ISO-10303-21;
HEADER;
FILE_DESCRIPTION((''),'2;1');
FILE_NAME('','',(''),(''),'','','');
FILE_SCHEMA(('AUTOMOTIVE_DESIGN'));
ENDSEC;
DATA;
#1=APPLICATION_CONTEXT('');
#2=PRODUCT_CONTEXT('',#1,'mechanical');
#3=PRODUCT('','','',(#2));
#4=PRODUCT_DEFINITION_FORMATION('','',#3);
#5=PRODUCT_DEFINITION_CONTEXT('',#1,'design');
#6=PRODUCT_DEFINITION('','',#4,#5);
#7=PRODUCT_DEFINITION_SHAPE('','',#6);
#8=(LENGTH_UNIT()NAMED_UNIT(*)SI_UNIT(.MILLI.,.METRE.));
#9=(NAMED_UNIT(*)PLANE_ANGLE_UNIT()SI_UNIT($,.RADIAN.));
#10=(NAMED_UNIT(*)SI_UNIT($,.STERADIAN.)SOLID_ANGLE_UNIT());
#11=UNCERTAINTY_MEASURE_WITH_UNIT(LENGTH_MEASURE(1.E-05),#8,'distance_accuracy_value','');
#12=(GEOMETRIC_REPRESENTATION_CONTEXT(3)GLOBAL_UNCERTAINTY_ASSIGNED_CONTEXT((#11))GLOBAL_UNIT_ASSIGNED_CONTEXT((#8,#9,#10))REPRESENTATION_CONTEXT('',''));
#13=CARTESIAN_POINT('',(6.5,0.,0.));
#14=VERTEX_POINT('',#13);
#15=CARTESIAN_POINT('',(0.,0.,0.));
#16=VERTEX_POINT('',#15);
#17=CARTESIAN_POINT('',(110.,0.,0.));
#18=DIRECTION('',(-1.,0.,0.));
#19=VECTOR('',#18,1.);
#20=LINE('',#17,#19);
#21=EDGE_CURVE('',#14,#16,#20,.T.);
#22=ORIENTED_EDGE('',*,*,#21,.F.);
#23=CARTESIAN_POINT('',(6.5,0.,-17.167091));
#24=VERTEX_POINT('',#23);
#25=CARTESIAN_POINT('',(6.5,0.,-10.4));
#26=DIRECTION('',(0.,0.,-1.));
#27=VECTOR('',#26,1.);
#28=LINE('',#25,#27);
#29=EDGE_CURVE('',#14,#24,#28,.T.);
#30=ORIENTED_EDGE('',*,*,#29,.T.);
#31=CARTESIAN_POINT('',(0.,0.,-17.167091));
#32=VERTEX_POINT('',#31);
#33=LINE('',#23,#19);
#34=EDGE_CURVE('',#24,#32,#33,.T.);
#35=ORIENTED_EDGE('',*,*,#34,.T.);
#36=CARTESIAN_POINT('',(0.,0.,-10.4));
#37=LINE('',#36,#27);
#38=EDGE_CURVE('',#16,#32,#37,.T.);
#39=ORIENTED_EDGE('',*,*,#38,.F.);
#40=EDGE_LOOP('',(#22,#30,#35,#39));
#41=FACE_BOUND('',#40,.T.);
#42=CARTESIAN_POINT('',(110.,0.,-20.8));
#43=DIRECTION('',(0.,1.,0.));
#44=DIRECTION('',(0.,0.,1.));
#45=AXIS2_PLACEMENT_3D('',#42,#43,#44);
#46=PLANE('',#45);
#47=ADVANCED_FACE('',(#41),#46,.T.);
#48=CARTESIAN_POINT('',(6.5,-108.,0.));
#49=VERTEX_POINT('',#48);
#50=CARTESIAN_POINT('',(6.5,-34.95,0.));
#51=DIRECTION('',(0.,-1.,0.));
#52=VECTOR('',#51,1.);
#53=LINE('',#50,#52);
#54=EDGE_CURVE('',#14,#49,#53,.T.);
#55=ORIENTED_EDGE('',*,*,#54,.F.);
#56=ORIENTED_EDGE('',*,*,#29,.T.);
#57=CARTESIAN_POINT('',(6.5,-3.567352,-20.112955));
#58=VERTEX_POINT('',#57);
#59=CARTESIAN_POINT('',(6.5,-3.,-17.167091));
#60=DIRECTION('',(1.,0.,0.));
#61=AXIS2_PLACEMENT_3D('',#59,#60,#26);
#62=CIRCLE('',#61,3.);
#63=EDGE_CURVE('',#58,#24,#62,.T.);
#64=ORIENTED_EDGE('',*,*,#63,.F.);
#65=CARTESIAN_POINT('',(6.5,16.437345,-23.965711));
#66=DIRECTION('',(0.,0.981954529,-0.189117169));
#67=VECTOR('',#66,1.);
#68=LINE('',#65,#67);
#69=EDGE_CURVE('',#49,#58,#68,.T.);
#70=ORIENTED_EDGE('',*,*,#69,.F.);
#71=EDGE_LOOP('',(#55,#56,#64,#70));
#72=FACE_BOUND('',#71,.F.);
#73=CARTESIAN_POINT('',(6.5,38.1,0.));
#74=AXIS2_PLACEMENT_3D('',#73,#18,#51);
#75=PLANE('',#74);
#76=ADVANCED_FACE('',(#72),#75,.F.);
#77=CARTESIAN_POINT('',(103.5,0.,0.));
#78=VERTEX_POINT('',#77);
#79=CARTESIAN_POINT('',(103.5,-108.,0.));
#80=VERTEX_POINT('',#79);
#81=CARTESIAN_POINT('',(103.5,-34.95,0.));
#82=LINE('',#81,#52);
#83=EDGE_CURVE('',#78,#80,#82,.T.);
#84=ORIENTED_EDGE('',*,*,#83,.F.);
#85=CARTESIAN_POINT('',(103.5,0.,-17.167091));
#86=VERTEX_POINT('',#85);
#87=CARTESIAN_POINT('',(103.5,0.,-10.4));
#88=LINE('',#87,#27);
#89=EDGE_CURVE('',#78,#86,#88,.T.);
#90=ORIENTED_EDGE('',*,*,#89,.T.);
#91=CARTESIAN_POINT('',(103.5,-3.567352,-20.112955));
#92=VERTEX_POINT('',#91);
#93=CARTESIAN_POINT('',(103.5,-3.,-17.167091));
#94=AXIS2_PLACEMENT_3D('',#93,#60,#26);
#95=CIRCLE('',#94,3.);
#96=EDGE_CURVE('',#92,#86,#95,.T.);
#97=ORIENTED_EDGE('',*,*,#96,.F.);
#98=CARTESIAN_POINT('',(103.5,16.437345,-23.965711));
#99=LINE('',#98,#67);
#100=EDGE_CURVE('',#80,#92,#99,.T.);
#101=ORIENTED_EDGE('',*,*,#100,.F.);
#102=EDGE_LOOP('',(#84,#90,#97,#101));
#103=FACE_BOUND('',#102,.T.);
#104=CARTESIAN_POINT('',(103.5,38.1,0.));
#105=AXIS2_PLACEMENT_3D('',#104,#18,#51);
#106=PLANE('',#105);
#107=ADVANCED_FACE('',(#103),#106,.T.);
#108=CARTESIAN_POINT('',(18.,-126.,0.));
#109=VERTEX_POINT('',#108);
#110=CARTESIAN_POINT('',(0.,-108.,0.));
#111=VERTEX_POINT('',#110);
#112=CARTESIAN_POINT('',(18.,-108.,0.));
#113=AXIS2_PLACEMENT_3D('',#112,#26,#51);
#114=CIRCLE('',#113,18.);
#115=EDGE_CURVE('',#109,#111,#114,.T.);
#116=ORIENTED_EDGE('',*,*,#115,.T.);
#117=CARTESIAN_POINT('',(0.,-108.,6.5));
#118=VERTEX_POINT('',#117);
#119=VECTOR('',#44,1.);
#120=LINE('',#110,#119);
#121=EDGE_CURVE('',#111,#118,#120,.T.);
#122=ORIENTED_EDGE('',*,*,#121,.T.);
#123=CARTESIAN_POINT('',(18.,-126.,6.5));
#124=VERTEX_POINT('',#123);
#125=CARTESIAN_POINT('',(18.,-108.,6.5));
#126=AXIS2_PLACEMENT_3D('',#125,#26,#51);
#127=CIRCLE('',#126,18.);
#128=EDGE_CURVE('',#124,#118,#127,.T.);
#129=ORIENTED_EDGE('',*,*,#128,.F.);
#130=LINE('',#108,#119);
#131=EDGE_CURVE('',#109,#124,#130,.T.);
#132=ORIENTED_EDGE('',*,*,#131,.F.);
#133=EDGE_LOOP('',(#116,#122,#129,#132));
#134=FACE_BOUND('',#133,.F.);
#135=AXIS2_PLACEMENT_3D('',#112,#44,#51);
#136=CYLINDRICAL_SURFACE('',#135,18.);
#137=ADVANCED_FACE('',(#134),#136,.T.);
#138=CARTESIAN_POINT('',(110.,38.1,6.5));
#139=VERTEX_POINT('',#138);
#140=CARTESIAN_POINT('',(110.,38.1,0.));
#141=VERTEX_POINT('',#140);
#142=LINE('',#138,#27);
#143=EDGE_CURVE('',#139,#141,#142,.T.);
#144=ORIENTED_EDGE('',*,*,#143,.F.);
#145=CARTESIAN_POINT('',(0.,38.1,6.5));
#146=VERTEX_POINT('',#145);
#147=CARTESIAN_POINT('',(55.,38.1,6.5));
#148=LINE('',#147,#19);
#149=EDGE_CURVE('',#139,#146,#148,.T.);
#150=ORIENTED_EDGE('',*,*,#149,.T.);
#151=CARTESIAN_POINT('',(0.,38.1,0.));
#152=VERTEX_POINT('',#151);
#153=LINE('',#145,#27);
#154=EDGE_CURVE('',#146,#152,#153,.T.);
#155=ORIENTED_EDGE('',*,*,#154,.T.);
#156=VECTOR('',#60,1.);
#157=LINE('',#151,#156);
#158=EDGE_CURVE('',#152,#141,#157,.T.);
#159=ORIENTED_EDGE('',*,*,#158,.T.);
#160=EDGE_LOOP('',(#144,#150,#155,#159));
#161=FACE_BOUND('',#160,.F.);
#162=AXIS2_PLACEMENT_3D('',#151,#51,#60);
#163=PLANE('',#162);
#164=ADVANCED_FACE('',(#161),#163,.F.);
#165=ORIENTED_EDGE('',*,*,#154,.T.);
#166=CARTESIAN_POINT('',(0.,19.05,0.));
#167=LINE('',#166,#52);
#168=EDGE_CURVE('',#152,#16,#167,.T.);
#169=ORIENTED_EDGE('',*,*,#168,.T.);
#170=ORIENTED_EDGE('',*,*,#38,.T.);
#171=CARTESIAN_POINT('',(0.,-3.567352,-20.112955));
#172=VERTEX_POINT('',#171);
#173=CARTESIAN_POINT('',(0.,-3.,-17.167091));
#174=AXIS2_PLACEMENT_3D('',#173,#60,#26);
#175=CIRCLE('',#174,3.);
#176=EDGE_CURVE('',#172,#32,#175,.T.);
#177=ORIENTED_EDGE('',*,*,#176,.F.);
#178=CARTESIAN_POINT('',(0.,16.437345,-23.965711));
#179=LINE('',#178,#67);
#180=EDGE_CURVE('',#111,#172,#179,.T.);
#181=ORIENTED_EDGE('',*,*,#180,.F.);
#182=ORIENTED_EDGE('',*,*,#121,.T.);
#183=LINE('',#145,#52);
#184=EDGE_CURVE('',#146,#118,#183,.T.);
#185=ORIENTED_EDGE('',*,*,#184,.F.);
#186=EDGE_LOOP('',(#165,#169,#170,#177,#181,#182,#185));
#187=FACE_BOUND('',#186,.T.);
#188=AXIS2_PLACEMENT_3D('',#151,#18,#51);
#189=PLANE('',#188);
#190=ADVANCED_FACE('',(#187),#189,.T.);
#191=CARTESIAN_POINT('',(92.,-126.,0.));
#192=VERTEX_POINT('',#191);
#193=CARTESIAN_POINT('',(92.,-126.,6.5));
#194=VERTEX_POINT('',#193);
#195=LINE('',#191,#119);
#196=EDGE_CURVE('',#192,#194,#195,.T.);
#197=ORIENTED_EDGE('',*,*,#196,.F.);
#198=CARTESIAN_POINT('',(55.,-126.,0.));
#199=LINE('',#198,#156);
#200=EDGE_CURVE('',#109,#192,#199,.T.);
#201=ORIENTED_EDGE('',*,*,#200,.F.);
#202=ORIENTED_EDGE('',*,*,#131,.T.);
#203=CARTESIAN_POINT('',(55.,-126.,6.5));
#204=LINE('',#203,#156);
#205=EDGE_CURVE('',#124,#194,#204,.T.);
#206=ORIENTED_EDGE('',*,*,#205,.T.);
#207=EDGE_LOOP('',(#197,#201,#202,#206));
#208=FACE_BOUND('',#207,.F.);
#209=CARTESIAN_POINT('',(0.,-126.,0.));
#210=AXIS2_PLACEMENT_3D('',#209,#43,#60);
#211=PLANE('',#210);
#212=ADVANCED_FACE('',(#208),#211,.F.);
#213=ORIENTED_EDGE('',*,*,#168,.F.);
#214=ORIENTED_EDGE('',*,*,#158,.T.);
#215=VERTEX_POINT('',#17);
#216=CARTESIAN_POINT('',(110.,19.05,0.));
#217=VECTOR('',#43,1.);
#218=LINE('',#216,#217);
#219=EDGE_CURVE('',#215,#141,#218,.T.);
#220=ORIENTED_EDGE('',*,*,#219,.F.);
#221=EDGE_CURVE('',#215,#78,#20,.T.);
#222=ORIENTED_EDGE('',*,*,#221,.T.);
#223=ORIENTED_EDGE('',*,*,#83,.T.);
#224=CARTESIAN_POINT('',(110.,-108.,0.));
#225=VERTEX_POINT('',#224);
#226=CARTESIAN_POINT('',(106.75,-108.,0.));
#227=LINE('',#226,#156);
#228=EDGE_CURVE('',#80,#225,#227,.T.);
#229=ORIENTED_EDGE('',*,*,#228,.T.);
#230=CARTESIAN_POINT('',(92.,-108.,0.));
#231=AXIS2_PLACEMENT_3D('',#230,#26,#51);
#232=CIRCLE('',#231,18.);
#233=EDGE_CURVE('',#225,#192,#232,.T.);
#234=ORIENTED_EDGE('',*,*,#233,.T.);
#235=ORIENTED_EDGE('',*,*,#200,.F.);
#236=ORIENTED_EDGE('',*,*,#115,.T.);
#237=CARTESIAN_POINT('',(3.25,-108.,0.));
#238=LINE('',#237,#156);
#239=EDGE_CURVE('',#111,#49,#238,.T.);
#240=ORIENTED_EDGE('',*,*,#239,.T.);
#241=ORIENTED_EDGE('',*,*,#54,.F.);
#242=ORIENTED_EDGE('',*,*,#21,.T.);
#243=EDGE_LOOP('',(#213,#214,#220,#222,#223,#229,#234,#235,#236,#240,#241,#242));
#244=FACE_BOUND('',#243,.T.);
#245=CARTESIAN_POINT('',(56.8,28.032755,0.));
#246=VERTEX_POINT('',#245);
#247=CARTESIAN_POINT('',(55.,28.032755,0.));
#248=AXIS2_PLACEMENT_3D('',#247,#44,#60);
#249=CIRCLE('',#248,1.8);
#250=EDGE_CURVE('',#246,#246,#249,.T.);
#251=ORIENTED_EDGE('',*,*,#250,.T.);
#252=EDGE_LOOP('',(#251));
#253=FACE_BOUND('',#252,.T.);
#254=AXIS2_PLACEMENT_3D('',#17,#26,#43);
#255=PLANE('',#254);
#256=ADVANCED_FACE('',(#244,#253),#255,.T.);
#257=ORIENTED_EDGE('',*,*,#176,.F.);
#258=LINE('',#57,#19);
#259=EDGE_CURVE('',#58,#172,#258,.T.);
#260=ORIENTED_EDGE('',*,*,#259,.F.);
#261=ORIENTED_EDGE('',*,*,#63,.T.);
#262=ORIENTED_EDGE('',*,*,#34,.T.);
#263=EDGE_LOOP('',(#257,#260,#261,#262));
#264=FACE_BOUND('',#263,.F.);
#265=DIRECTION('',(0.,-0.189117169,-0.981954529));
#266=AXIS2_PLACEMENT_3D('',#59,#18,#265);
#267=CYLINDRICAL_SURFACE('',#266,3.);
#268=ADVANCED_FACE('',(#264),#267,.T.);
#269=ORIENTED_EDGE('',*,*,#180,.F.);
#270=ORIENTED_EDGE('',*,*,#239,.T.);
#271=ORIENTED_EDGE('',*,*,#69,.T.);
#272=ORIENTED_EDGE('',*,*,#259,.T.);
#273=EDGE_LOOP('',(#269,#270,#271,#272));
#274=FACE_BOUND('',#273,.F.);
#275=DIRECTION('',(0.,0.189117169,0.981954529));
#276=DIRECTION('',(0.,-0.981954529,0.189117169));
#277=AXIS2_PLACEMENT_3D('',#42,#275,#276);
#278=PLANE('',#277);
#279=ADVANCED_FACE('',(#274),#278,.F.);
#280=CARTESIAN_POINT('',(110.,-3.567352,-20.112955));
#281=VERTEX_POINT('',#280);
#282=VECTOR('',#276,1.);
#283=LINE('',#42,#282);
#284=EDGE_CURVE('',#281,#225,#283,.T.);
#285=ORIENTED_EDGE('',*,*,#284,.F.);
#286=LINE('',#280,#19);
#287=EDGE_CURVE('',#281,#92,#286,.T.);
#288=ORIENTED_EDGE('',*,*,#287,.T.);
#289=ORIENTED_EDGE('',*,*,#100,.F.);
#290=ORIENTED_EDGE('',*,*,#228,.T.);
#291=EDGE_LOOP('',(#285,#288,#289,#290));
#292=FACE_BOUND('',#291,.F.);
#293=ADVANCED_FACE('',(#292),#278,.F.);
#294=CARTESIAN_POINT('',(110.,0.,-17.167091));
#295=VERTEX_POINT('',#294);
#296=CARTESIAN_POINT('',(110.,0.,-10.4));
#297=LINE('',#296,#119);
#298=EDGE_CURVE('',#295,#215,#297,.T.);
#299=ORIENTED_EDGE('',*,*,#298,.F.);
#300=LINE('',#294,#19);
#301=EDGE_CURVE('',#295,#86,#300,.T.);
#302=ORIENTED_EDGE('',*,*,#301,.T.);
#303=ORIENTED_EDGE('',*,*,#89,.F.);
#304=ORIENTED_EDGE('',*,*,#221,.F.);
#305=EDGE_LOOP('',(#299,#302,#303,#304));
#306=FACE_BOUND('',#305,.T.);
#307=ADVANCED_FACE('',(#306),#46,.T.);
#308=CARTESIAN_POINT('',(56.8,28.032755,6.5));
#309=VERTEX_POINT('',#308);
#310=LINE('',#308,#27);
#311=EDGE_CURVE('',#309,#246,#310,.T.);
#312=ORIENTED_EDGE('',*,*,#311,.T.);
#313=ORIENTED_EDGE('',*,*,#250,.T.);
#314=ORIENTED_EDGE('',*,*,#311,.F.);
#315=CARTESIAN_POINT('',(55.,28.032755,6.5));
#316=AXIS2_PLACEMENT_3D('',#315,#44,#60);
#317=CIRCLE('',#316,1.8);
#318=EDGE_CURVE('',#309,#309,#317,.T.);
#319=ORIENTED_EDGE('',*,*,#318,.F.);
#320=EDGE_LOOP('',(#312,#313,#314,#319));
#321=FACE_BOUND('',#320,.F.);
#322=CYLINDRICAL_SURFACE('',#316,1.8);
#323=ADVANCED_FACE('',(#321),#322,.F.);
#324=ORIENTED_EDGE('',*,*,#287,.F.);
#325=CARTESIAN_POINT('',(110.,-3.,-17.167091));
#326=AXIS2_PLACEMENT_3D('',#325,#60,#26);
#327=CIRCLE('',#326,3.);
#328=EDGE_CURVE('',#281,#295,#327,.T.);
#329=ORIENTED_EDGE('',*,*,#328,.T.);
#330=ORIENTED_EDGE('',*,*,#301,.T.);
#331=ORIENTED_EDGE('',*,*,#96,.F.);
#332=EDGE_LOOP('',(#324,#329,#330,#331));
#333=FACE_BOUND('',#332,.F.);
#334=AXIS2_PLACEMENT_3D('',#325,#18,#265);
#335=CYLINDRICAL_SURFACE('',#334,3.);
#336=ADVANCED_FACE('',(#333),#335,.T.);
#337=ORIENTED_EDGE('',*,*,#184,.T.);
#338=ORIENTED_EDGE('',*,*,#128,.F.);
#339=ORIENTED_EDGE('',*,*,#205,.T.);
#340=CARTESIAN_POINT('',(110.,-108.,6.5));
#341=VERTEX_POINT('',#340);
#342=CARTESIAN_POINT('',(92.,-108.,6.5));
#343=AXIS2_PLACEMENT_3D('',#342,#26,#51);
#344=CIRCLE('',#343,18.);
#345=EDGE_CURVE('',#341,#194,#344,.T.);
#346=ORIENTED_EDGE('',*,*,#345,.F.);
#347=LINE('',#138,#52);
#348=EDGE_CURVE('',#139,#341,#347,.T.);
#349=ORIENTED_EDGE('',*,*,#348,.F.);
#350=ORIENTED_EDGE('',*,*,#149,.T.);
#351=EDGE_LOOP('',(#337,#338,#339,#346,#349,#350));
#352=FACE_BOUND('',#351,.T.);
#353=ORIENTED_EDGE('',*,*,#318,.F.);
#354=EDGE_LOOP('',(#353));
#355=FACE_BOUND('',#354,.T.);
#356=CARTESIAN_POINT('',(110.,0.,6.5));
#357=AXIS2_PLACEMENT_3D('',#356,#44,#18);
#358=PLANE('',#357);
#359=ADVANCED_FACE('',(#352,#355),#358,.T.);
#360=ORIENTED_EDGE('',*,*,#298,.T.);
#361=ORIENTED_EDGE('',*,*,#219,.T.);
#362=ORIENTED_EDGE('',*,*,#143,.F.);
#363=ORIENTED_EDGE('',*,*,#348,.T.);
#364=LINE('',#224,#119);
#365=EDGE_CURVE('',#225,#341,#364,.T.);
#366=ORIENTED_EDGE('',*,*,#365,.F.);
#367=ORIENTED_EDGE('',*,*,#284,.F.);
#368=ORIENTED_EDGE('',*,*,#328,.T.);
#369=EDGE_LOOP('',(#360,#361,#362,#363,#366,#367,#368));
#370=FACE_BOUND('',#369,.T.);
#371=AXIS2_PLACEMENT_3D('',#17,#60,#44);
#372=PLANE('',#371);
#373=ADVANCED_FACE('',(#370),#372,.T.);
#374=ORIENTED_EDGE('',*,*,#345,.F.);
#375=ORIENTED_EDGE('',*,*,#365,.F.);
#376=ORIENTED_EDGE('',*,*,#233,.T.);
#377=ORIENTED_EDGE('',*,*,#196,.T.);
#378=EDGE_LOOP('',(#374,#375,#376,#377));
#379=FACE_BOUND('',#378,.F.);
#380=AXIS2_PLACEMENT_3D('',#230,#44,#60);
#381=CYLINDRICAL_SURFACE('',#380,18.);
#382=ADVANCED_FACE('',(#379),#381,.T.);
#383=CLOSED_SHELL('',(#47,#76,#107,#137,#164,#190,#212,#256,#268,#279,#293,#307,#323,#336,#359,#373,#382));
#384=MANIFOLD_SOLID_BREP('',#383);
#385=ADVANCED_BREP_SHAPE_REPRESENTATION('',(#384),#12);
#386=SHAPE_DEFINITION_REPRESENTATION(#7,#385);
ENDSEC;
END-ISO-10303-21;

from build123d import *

# Parameters (mm, degrees)
F0_W      = 110
F0_H      = 126
F1_DEPTH  = 6.5
F2_W      = 110
F2_H      = 6.5
F3_DEPTH  = 38.1
F4_R      = 1.8
F5_DEPTH  = 14.3
F6_R      = 18
F7_R      = 18
F8_W      = 6.5
F8_H      = 146.1
F9_DEPTH  = 20.8
F10_W     = 38.1
F10_H     = 20.8
F11_DEPTH = 133.7
F13_R     = 3


# Not quite as in the source:
# - a feature of the source that left no trace in its solid (it failed there, or was rolled back) is left out


with BuildPart() as f1:
    # F0 (on Top) → F1 (new body)
    with BuildSketch(Plane.XY):
        with Locations((55, -63)):
            Rectangle(F0_W, F0_H)
    extrude(amount=F1_DEPTH)

    # F2 (on face) → F3 (join)
    with BuildSketch(Plane(origin=(0, 0, 0), x_dir=(-1, 0, 0), z_dir=(0, 1, 0))):
        with Locations((-55, 3.25)):
            Rectangle(F2_W, F2_H)
    extrude(amount=F3_DEPTH)

    # F4 (on face) → F5 (cut)
    with BuildSketch(Plane.XY.offset(6.5)):
        with Locations((55, 28.0327554792)):
            Circle(F4_R)
    extrude(amount=-F5_DEPTH, mode=Mode.SUBTRACT)

    # F6
    f6_edges = [f1.edges().sort_by_distance(p)[0] for p in [
        (110, -126, 3.25),
    ]]
    fillet(f6_edges, radius=F6_R)

    # F7
    f7_edges = [f1.edges().sort_by_distance(p)[0] for p in [
        (0, -126, 3.25),
    ]]
    fillet(f7_edges, radius=F7_R)

    # F8 (on face) → F9 (join)
    with BuildSketch(Plane(origin=(0, 0, 0), x_dir=(1, 0, 0), z_dir=(0, 0, -1))):
        with Locations((3.25, 34.95)):
            Rectangle(F8_W, F8_H)
        with Locations((106.75, 34.95)):
            Rectangle(F8_W, F8_H)
    extrude(amount=F9_DEPTH)

    # F10 (on face) → F11 (cut)
    with BuildSketch(Plane.YZ.offset(110)):
        with Locations((19.05, -10.4)):
            Rectangle(F10_W, F10_H)
        Polygon((0, -20.8), (-108, 0), (-108, -20.8), align=None)
    extrude(amount=-F11_DEPTH, mode=Mode.SUBTRACT)

    # F13
    f13_edges = [f1.edges().sort_by_distance(p)[0] for p in [
        (106.75, 0, -20.8),
        (3.25, 0, -20.8),
    ]]
    fillet(f13_edges, radius=F13_R)


solid = f1.part
